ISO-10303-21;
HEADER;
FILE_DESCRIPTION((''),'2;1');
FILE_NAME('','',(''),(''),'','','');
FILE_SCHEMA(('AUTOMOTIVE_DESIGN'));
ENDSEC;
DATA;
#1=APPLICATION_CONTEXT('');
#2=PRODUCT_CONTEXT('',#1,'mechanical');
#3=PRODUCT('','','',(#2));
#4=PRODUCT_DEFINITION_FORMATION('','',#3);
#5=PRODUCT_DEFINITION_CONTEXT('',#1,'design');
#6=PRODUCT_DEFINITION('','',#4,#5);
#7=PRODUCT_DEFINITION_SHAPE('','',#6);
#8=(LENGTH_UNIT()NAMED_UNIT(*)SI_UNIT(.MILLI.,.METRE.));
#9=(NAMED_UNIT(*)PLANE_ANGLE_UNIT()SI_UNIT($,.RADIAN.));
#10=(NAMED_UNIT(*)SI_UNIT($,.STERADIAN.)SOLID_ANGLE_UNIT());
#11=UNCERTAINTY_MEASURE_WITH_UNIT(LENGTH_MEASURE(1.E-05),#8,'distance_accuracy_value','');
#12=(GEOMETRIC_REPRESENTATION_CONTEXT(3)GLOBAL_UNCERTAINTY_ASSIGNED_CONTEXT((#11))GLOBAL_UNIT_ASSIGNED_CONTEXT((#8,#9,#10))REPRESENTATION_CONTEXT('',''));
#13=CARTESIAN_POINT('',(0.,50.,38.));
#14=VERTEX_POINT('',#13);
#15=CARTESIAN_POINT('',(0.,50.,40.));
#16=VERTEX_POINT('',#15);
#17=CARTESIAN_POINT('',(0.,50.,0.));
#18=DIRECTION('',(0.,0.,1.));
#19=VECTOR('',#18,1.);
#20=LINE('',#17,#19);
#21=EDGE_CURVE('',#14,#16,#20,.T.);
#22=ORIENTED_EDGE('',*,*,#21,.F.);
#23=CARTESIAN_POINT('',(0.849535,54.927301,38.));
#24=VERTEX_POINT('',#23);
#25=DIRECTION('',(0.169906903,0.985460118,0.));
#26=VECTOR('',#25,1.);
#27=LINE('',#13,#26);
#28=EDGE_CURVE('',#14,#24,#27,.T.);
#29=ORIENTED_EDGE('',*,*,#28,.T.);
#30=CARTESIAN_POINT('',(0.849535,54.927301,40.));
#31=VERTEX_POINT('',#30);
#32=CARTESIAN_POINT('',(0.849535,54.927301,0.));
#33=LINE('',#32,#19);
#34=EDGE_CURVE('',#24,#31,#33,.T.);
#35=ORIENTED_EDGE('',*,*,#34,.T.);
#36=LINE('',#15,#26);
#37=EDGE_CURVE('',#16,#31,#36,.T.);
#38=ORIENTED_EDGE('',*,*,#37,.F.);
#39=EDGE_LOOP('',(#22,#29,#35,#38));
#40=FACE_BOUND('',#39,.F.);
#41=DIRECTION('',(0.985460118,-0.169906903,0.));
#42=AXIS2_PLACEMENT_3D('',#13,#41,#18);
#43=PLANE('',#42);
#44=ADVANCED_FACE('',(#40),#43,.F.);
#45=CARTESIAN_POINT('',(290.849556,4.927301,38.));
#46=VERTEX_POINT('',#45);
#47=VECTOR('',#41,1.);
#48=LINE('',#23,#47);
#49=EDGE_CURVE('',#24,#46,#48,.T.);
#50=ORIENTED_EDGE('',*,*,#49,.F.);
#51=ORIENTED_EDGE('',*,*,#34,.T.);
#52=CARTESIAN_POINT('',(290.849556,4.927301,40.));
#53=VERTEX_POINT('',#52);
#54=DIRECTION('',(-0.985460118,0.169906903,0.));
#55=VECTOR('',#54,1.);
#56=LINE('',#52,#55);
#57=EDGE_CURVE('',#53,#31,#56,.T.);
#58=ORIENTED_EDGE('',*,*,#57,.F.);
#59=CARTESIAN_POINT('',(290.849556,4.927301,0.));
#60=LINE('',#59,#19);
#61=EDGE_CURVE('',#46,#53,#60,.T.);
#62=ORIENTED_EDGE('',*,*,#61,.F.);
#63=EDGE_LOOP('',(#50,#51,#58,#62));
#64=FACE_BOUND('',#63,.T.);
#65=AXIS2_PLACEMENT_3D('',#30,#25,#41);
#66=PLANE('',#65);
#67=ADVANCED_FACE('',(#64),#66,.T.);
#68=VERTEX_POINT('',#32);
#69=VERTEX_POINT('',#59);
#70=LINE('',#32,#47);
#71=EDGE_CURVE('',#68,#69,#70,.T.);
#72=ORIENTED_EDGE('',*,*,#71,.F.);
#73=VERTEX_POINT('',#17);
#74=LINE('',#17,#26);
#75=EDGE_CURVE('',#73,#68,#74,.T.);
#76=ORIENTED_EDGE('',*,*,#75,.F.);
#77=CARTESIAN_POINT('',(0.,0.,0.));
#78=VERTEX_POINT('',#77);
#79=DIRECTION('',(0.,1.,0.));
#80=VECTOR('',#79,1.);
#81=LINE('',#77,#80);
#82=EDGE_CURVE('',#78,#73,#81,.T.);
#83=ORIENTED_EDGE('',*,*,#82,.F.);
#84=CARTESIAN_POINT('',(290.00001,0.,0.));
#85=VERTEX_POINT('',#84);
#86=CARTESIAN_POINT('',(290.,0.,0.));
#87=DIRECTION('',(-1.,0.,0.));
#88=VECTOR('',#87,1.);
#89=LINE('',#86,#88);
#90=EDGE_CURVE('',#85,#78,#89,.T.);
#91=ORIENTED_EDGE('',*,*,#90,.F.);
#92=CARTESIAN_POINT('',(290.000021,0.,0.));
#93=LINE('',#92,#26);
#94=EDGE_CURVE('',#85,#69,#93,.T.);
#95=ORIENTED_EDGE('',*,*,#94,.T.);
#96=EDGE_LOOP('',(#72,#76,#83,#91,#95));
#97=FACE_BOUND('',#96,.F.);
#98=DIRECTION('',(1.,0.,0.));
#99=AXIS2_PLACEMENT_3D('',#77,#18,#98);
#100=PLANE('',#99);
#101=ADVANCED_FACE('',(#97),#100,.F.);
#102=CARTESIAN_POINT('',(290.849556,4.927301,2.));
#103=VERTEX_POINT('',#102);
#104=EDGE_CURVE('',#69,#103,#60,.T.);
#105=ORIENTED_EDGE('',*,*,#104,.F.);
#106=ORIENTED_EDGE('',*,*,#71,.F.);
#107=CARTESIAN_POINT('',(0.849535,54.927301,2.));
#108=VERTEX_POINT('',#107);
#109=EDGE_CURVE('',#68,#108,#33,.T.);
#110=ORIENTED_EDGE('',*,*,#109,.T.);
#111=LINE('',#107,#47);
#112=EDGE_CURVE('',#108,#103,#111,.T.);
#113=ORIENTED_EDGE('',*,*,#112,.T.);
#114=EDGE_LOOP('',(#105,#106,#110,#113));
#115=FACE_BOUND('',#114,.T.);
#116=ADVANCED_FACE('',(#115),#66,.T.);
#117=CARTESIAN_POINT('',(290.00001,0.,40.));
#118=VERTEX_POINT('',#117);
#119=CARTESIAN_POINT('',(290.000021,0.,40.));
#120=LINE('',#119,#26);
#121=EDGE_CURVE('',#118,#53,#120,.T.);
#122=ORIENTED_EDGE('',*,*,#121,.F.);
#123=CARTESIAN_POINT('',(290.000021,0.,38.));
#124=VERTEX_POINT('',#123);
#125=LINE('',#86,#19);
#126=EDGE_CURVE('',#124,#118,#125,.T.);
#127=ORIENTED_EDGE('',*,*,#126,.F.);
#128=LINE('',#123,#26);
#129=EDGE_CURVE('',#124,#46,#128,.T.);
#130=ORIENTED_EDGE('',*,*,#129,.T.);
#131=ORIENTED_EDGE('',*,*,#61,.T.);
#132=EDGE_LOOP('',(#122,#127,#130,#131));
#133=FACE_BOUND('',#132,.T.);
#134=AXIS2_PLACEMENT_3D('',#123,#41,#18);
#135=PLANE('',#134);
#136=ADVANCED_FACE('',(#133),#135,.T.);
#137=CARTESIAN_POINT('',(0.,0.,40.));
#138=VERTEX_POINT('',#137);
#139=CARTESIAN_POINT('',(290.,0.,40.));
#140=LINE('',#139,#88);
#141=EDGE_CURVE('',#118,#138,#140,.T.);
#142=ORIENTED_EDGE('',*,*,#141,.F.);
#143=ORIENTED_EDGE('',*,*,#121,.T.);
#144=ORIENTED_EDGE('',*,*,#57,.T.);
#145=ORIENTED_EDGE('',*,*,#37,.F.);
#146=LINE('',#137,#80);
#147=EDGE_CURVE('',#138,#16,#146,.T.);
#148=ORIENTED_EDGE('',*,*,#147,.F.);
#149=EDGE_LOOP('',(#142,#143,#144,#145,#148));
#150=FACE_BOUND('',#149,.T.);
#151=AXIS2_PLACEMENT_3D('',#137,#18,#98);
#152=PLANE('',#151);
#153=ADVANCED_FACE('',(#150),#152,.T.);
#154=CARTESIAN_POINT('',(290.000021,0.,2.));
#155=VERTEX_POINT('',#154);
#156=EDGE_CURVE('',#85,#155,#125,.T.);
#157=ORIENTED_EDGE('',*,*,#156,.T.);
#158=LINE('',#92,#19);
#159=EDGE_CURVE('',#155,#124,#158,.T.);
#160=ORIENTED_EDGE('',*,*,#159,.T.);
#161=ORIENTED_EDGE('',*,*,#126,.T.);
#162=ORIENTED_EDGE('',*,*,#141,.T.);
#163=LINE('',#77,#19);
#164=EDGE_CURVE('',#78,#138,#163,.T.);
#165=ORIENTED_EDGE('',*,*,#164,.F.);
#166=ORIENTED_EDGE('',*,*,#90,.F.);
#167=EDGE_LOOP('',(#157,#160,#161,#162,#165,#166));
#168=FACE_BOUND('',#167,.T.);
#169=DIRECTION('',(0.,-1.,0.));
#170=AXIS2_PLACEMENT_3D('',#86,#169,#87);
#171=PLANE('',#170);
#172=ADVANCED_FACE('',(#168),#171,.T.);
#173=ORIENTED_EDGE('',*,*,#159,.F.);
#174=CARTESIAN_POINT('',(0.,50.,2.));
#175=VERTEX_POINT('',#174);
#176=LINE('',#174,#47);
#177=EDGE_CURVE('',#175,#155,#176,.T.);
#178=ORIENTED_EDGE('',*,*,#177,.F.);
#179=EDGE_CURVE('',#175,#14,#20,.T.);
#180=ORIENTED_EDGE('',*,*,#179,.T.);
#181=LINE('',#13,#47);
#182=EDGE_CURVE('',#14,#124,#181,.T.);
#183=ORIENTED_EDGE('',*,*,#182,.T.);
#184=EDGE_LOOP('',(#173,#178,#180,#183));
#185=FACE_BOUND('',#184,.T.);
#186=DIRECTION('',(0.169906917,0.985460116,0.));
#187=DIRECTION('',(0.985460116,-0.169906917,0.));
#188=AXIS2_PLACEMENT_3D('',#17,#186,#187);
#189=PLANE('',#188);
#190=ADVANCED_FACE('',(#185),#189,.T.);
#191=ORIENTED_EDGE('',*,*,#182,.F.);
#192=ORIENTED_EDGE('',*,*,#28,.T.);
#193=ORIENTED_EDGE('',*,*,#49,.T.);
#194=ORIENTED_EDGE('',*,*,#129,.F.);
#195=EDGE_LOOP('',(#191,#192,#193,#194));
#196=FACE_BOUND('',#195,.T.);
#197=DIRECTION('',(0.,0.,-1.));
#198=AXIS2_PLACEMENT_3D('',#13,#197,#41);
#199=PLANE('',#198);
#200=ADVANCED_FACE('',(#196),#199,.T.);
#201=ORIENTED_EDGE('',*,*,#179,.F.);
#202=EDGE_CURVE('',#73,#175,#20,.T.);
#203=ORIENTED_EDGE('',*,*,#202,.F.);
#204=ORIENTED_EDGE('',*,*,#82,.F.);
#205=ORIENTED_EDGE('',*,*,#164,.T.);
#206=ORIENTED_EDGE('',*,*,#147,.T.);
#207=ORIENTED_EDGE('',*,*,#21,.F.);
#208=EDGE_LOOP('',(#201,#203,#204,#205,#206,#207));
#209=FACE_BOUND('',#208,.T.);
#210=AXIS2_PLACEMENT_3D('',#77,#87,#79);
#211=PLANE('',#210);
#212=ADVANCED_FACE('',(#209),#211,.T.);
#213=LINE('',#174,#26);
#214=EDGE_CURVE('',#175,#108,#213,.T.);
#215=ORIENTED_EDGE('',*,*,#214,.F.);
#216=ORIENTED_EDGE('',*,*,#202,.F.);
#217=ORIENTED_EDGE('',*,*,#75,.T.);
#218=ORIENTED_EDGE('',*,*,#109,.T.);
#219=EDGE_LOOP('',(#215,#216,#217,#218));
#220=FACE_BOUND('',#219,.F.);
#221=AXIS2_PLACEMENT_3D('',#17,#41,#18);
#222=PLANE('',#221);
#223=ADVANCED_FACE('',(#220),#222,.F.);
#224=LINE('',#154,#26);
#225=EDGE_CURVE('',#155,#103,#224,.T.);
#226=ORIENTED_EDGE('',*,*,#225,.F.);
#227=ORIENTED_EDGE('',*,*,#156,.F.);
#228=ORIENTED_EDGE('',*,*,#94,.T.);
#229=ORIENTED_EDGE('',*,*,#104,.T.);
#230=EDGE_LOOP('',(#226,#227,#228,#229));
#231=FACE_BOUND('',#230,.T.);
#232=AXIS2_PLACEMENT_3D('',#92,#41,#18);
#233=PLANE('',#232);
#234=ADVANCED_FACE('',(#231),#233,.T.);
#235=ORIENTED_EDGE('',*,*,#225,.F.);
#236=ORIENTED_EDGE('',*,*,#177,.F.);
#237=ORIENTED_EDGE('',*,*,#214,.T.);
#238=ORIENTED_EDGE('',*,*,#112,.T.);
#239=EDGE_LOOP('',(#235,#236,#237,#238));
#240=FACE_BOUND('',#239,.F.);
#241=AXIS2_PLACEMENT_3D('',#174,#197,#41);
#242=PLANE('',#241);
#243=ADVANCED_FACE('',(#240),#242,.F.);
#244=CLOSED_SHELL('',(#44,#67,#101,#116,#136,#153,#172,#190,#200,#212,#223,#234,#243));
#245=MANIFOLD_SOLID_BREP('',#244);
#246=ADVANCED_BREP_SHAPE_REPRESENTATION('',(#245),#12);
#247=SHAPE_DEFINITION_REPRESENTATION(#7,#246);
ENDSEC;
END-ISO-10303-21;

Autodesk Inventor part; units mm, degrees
ref_plane "YZ Plane" through (0, 0, 0) normal (1, 0, 0) x (0, 1, 0)
ref_plane "XZ Plane" through (0, 0, 0) normal (0, 1, 0) x (-1, 0, 0)
ref_plane "XY Plane" through (0, 0, 0) normal (0, 0, 1) x (1, 0, 0)
sketch "Esquisse2" plane through (0, 0, 0) normal (0, 0, 1) x (1, 0, 0)
  line L0 (0, 0) -> (0, 50)
  line L1 (0, 50) -> (290, 0)
  line L2 (290, 0) -> (0, 0)
  dimension "d0" = 290
  dimension "d1" = 50
extrude "Extrusion1" add sketch "Esquisse2" along normal blind 40
sketch "Esquisse3" plane through (0, 50, 40) normal (0.1699069, 0.9854601, 0) x (0.9854601, -0.1699069, 0)
  line L0 (0, 40) -> (0, 0) projected
  line L1 (0, 2) -> (294.2788, 2)
  line L2 (294.2788, 40) -> (294.2788, 0) projected
  line L3 (0, 38) -> (294.2788, 38)
  line L4 (0, 40) -> (294.2788, 40) projected
  line L5 (294.2788, 0) -> (0, 0) projected
  point P0 (8.4953, 40)
  dimension "d5" = 2
  dimension "d6" = 2
extrude "Extrusion2" add sketch "Esquisse3" along normal blind 5 contours L4 L2 L3 L0 | L1 L2 L5 L0
properties part number "rampe-rendmonnaie"
